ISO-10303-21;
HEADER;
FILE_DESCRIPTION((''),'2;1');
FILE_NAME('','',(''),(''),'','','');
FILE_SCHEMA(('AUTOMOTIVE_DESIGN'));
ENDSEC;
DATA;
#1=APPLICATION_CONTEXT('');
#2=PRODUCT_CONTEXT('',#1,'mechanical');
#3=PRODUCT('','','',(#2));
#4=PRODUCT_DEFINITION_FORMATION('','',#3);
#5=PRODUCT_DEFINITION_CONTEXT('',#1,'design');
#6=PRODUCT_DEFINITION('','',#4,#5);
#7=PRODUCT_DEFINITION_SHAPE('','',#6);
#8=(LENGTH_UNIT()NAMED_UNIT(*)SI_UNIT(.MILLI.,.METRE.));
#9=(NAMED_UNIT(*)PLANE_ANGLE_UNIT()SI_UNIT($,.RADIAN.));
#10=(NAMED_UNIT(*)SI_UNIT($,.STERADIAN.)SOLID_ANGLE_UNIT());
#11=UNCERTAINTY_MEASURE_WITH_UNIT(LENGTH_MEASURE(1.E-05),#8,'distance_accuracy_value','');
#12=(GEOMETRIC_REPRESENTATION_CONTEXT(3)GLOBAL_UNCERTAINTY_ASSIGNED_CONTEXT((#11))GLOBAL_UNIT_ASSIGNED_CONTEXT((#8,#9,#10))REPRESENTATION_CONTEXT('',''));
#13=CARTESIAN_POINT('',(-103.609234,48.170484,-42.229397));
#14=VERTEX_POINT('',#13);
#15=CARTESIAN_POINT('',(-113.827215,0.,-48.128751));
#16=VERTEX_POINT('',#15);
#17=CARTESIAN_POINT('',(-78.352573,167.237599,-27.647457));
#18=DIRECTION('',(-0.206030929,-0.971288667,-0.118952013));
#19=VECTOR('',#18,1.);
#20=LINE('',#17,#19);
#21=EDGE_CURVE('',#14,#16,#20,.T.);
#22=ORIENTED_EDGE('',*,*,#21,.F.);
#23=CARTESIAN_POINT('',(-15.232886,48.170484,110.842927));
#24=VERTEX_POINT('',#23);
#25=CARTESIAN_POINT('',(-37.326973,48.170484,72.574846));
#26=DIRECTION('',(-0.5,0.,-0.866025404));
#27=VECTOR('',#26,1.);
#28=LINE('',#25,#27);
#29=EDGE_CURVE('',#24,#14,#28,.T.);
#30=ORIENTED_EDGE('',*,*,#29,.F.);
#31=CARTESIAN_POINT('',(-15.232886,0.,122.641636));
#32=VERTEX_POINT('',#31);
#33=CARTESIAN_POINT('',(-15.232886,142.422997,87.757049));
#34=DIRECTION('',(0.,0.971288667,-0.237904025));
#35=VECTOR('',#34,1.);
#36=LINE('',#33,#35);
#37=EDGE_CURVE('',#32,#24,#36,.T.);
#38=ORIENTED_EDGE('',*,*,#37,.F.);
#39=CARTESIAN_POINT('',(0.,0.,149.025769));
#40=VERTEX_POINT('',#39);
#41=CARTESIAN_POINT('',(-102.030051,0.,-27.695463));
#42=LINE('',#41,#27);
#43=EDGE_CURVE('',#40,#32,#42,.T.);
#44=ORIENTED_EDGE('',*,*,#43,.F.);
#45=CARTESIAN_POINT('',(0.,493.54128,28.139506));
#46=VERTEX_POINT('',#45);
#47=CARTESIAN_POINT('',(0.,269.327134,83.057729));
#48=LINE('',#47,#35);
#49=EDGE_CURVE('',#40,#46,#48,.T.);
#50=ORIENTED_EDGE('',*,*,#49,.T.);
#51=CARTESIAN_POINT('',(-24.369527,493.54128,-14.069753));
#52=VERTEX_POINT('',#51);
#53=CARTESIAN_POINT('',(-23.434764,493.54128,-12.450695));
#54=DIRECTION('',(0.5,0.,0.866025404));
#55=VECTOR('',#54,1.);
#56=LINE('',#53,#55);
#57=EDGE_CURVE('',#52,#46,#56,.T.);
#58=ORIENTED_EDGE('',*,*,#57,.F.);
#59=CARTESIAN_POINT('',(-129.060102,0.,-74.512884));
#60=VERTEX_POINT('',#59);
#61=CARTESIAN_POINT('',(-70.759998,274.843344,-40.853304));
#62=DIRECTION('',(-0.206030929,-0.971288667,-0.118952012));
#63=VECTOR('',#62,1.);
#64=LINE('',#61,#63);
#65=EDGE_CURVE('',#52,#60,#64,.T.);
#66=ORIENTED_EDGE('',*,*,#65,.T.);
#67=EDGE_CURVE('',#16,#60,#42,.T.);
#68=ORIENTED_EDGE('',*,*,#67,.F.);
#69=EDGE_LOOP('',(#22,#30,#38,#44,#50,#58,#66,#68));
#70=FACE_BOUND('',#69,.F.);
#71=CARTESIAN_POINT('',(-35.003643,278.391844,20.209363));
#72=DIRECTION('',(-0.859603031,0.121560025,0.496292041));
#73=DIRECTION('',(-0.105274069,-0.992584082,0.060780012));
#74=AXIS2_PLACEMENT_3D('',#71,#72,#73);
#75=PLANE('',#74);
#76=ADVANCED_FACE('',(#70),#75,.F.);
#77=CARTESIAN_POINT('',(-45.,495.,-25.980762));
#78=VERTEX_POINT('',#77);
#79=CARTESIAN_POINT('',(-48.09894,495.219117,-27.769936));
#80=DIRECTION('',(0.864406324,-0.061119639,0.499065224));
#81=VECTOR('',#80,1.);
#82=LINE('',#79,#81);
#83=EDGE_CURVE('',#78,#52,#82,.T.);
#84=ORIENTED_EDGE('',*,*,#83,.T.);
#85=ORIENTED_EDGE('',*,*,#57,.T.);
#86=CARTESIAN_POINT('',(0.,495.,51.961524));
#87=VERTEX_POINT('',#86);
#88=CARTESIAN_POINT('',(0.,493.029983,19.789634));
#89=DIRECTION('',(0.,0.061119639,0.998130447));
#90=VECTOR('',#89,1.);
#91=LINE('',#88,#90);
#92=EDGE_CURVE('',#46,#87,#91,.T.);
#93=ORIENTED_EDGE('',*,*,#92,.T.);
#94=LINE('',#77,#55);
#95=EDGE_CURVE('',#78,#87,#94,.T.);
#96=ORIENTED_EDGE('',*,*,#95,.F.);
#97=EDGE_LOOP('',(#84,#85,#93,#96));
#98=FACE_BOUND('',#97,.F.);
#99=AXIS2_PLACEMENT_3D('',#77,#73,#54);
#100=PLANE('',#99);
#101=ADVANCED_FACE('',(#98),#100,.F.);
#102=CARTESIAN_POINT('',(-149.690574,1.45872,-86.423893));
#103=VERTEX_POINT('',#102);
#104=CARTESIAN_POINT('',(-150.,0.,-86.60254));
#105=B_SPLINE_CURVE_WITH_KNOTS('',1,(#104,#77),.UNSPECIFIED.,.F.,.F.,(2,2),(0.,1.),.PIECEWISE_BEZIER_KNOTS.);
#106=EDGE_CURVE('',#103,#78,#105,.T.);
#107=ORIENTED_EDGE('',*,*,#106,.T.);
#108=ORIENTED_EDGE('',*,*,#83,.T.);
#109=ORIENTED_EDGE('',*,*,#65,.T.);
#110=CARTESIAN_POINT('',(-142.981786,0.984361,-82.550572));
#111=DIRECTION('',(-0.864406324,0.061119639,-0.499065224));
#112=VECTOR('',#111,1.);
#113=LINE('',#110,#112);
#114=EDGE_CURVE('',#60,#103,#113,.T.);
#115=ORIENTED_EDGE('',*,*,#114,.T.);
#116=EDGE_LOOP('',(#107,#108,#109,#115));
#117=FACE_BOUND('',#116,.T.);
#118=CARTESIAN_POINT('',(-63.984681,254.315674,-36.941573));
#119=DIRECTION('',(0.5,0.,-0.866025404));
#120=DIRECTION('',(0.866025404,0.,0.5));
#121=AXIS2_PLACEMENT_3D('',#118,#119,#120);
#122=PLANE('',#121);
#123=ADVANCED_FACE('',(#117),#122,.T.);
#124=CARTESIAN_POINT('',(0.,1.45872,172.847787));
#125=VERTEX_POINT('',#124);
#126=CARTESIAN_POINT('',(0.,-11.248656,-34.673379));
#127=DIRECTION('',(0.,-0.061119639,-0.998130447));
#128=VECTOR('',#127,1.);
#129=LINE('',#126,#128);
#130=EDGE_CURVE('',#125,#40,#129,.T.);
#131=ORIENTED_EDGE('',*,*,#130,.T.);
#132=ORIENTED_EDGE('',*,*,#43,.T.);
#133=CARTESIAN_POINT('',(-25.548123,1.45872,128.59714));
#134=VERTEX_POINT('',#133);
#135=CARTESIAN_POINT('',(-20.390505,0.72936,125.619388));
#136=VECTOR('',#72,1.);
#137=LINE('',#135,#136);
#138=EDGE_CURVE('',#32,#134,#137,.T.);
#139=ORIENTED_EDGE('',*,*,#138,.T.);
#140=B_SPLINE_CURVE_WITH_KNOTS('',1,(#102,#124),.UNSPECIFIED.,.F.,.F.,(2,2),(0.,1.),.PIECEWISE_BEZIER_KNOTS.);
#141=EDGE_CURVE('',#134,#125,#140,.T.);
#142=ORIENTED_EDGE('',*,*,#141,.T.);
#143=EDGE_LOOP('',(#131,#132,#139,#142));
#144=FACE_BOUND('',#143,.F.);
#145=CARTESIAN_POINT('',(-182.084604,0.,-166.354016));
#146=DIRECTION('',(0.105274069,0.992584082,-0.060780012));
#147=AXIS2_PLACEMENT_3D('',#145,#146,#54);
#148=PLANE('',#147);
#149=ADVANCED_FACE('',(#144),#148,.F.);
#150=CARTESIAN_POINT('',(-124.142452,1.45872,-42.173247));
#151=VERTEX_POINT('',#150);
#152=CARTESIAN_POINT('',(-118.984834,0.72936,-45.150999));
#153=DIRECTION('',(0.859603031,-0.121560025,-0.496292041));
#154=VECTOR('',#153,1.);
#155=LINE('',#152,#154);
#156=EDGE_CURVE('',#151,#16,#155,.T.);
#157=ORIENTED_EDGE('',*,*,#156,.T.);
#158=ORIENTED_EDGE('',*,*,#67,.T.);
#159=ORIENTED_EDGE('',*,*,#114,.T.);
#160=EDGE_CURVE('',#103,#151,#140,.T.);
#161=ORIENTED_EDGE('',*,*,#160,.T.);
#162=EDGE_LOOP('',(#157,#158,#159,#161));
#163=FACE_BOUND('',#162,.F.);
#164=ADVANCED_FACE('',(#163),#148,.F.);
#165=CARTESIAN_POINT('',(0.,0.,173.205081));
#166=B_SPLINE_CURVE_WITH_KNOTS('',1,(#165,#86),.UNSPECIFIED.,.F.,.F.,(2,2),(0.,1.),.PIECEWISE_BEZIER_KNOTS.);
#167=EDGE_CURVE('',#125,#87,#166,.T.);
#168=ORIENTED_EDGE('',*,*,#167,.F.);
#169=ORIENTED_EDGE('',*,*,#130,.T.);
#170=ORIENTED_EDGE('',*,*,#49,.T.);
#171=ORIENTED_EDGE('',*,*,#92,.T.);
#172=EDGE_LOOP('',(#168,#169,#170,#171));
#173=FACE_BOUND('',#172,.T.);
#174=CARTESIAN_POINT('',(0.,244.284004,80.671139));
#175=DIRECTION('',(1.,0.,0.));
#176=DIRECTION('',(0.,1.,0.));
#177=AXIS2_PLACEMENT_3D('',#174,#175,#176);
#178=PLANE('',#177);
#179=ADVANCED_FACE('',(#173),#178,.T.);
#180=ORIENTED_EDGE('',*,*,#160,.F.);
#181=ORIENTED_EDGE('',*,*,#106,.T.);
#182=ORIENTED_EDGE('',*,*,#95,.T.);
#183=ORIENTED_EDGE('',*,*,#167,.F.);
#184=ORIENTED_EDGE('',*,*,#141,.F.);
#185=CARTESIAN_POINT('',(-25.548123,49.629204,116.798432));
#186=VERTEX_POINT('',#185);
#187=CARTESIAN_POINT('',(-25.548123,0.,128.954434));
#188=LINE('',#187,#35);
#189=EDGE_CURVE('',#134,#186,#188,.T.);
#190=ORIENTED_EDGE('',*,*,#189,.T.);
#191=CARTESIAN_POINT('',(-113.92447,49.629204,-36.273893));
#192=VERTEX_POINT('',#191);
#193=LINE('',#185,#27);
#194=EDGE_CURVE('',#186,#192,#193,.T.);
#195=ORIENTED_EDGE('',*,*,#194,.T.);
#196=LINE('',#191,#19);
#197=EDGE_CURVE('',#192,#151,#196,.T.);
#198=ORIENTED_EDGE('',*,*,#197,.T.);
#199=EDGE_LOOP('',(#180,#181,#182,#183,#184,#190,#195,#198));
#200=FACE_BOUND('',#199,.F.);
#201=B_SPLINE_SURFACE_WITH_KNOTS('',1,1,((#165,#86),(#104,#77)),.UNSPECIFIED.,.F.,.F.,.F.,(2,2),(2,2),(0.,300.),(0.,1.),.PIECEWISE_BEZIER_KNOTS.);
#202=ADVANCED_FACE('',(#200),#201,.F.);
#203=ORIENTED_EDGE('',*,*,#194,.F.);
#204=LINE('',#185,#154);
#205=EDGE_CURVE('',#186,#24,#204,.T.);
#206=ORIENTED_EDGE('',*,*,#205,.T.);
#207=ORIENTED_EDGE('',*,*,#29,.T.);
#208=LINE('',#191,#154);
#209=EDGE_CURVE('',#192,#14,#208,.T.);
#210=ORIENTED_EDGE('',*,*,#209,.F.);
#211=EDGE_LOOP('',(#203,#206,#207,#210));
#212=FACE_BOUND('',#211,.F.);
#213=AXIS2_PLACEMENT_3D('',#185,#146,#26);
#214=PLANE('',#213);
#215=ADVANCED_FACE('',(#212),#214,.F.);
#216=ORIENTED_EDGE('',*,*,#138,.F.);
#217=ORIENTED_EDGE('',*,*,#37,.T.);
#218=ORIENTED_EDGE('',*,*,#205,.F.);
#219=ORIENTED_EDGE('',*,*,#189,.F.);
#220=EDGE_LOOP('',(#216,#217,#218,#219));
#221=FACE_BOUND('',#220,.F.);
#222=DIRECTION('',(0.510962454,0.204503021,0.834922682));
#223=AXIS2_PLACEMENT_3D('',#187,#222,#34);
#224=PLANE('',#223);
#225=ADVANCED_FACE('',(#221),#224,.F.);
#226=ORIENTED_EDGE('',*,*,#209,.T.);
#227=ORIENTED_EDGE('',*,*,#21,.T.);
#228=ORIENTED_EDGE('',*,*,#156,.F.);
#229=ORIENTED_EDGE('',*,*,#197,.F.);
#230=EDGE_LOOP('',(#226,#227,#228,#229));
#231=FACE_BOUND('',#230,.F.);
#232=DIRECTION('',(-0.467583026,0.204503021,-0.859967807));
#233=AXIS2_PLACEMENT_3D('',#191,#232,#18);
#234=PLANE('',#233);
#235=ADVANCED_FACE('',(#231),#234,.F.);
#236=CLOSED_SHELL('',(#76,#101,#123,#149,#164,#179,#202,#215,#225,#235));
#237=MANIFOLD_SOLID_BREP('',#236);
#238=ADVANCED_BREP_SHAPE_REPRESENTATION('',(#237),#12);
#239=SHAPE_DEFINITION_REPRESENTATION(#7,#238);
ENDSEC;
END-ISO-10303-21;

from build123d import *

# Parameters (mm, degrees)
F7_R      = 342.018490112
F8_DEPTH  = 245.8819093468
F10_DEPTH = 134.9414547473
F11_W     = 62.9695011303
F11_H     = 407.8883975744
F12_DEPTH = 201.1136668937
F13_W     = 28.0343884617
F13_H     = 90
F14_DEPTH = 134.9414547473
F17_R     = 326.8037902675
F18_DEPTH = 78.4909831788
F20_R     = 344.6516886149
F21_DEPTH = 6.9809661843


with BuildPart() as f5:
    # F1 (on Front) → F5 section 0
    with BuildSketch(Plane.XZ):
        Polygon((-150, -86.6025403784), (150, -86.6025403784), (0, 173.2050807569), align=None)
    # F4 (on line) → F5 section 1
    with BuildSketch(Plane(origin=(0, 495, 0), x_dir=(-1, 0, 0), z_dir=(0, 1, 0))):
        Polygon((-45, -25.9807621135), (45, -25.9807621135), (0, 51.9615242271), align=None)
    loft()

    # F7 (on face) → F8 (cut, through all)
    with BuildSketch(Plane(origin=(-63.5765006646, 8.9906162556, 36.7059097728), x_dir=(-0.1052740693, -0.9925840823, 0.0607800123), z_dir=(-0.8596030307, 0.1215600245, 0.4962920411))):
        with Locations((-271.4140117168, 0)):
            Circle(F7_R)
    extrude(amount=-F8_DEPTH, mode=Mode.SUBTRACT)

    # F9 (on face) → F10 (cut, through all)
    with BuildSketch(Plane(origin=(-73.8917370326, 10.4493365501, 42.6614142666), x_dir=(-0.1052740693, -0.9925840823, 0.0607800123), z_dir=(-0.8596030307, 0.1215600245, 0.4962920411))):
        Polygon((-39.4725930665, -88.3763476395), (10.5274069335, -98.9037545729), (10.5274069335, 98.9037545729), (-39.4725930665, 88.3763476395), align=None)
    extrude(amount=-F10_DEPTH, mode=Mode.SUBTRACT)

    # F11 (on face) → F12 (cut, through all)
    with BuildSketch(Plane(origin=(-63.5765006646, 8.9906162556, 36.7059097728), x_dir=(0.1052740693, 0.9925840823, -0.0607800123), z_dir=(0.8596030307, -0.1215600245, -0.4962920411))):
        with Locations((-40.5425386316, -31.164906919)):
            Rectangle(F11_W, F11_H)
    extrude(amount=-F12_DEPTH, mode=Mode.SUBTRACT)

    # F13 (on face) → F14 (cut, through all)
    with BuildSketch(Plane(origin=(-73.8917370326, 10.4493365501, 42.6614142666), x_dir=(-0.1052740693, -0.9925840823, 0.0607800123), z_dir=(-0.8596030307, 0.1215600245, 0.4962920411))):
        with Locations((-502.1880928891, 0)):
            Rectangle(F13_W, F13_H)
    extrude(amount=-F14_DEPTH, mode=Mode.SUBTRACT)

    # F17 (on face) → F18 (cut, through all)
    with BuildSketch(Plane(origin=(0, 0, 0), x_dir=(0.8660254038, 0, 0.5), z_dir=(0.5, 0, -0.8660254038))):
        with Locations((-73.8831460476, -254.315674305)):
            Circle(F17_R)
    extrude(amount=F18_DEPTH, mode=Mode.SUBTRACT)

    # F20 (on face) → F21 (cut, through all)
    with BuildSketch(Plane.YZ):
        with Locations((244.284003973, 80.6711390615)):
            Circle(F20_R)
    extrude(amount=F21_DEPTH, mode=Mode.SUBTRACT)


solid = f5.part
